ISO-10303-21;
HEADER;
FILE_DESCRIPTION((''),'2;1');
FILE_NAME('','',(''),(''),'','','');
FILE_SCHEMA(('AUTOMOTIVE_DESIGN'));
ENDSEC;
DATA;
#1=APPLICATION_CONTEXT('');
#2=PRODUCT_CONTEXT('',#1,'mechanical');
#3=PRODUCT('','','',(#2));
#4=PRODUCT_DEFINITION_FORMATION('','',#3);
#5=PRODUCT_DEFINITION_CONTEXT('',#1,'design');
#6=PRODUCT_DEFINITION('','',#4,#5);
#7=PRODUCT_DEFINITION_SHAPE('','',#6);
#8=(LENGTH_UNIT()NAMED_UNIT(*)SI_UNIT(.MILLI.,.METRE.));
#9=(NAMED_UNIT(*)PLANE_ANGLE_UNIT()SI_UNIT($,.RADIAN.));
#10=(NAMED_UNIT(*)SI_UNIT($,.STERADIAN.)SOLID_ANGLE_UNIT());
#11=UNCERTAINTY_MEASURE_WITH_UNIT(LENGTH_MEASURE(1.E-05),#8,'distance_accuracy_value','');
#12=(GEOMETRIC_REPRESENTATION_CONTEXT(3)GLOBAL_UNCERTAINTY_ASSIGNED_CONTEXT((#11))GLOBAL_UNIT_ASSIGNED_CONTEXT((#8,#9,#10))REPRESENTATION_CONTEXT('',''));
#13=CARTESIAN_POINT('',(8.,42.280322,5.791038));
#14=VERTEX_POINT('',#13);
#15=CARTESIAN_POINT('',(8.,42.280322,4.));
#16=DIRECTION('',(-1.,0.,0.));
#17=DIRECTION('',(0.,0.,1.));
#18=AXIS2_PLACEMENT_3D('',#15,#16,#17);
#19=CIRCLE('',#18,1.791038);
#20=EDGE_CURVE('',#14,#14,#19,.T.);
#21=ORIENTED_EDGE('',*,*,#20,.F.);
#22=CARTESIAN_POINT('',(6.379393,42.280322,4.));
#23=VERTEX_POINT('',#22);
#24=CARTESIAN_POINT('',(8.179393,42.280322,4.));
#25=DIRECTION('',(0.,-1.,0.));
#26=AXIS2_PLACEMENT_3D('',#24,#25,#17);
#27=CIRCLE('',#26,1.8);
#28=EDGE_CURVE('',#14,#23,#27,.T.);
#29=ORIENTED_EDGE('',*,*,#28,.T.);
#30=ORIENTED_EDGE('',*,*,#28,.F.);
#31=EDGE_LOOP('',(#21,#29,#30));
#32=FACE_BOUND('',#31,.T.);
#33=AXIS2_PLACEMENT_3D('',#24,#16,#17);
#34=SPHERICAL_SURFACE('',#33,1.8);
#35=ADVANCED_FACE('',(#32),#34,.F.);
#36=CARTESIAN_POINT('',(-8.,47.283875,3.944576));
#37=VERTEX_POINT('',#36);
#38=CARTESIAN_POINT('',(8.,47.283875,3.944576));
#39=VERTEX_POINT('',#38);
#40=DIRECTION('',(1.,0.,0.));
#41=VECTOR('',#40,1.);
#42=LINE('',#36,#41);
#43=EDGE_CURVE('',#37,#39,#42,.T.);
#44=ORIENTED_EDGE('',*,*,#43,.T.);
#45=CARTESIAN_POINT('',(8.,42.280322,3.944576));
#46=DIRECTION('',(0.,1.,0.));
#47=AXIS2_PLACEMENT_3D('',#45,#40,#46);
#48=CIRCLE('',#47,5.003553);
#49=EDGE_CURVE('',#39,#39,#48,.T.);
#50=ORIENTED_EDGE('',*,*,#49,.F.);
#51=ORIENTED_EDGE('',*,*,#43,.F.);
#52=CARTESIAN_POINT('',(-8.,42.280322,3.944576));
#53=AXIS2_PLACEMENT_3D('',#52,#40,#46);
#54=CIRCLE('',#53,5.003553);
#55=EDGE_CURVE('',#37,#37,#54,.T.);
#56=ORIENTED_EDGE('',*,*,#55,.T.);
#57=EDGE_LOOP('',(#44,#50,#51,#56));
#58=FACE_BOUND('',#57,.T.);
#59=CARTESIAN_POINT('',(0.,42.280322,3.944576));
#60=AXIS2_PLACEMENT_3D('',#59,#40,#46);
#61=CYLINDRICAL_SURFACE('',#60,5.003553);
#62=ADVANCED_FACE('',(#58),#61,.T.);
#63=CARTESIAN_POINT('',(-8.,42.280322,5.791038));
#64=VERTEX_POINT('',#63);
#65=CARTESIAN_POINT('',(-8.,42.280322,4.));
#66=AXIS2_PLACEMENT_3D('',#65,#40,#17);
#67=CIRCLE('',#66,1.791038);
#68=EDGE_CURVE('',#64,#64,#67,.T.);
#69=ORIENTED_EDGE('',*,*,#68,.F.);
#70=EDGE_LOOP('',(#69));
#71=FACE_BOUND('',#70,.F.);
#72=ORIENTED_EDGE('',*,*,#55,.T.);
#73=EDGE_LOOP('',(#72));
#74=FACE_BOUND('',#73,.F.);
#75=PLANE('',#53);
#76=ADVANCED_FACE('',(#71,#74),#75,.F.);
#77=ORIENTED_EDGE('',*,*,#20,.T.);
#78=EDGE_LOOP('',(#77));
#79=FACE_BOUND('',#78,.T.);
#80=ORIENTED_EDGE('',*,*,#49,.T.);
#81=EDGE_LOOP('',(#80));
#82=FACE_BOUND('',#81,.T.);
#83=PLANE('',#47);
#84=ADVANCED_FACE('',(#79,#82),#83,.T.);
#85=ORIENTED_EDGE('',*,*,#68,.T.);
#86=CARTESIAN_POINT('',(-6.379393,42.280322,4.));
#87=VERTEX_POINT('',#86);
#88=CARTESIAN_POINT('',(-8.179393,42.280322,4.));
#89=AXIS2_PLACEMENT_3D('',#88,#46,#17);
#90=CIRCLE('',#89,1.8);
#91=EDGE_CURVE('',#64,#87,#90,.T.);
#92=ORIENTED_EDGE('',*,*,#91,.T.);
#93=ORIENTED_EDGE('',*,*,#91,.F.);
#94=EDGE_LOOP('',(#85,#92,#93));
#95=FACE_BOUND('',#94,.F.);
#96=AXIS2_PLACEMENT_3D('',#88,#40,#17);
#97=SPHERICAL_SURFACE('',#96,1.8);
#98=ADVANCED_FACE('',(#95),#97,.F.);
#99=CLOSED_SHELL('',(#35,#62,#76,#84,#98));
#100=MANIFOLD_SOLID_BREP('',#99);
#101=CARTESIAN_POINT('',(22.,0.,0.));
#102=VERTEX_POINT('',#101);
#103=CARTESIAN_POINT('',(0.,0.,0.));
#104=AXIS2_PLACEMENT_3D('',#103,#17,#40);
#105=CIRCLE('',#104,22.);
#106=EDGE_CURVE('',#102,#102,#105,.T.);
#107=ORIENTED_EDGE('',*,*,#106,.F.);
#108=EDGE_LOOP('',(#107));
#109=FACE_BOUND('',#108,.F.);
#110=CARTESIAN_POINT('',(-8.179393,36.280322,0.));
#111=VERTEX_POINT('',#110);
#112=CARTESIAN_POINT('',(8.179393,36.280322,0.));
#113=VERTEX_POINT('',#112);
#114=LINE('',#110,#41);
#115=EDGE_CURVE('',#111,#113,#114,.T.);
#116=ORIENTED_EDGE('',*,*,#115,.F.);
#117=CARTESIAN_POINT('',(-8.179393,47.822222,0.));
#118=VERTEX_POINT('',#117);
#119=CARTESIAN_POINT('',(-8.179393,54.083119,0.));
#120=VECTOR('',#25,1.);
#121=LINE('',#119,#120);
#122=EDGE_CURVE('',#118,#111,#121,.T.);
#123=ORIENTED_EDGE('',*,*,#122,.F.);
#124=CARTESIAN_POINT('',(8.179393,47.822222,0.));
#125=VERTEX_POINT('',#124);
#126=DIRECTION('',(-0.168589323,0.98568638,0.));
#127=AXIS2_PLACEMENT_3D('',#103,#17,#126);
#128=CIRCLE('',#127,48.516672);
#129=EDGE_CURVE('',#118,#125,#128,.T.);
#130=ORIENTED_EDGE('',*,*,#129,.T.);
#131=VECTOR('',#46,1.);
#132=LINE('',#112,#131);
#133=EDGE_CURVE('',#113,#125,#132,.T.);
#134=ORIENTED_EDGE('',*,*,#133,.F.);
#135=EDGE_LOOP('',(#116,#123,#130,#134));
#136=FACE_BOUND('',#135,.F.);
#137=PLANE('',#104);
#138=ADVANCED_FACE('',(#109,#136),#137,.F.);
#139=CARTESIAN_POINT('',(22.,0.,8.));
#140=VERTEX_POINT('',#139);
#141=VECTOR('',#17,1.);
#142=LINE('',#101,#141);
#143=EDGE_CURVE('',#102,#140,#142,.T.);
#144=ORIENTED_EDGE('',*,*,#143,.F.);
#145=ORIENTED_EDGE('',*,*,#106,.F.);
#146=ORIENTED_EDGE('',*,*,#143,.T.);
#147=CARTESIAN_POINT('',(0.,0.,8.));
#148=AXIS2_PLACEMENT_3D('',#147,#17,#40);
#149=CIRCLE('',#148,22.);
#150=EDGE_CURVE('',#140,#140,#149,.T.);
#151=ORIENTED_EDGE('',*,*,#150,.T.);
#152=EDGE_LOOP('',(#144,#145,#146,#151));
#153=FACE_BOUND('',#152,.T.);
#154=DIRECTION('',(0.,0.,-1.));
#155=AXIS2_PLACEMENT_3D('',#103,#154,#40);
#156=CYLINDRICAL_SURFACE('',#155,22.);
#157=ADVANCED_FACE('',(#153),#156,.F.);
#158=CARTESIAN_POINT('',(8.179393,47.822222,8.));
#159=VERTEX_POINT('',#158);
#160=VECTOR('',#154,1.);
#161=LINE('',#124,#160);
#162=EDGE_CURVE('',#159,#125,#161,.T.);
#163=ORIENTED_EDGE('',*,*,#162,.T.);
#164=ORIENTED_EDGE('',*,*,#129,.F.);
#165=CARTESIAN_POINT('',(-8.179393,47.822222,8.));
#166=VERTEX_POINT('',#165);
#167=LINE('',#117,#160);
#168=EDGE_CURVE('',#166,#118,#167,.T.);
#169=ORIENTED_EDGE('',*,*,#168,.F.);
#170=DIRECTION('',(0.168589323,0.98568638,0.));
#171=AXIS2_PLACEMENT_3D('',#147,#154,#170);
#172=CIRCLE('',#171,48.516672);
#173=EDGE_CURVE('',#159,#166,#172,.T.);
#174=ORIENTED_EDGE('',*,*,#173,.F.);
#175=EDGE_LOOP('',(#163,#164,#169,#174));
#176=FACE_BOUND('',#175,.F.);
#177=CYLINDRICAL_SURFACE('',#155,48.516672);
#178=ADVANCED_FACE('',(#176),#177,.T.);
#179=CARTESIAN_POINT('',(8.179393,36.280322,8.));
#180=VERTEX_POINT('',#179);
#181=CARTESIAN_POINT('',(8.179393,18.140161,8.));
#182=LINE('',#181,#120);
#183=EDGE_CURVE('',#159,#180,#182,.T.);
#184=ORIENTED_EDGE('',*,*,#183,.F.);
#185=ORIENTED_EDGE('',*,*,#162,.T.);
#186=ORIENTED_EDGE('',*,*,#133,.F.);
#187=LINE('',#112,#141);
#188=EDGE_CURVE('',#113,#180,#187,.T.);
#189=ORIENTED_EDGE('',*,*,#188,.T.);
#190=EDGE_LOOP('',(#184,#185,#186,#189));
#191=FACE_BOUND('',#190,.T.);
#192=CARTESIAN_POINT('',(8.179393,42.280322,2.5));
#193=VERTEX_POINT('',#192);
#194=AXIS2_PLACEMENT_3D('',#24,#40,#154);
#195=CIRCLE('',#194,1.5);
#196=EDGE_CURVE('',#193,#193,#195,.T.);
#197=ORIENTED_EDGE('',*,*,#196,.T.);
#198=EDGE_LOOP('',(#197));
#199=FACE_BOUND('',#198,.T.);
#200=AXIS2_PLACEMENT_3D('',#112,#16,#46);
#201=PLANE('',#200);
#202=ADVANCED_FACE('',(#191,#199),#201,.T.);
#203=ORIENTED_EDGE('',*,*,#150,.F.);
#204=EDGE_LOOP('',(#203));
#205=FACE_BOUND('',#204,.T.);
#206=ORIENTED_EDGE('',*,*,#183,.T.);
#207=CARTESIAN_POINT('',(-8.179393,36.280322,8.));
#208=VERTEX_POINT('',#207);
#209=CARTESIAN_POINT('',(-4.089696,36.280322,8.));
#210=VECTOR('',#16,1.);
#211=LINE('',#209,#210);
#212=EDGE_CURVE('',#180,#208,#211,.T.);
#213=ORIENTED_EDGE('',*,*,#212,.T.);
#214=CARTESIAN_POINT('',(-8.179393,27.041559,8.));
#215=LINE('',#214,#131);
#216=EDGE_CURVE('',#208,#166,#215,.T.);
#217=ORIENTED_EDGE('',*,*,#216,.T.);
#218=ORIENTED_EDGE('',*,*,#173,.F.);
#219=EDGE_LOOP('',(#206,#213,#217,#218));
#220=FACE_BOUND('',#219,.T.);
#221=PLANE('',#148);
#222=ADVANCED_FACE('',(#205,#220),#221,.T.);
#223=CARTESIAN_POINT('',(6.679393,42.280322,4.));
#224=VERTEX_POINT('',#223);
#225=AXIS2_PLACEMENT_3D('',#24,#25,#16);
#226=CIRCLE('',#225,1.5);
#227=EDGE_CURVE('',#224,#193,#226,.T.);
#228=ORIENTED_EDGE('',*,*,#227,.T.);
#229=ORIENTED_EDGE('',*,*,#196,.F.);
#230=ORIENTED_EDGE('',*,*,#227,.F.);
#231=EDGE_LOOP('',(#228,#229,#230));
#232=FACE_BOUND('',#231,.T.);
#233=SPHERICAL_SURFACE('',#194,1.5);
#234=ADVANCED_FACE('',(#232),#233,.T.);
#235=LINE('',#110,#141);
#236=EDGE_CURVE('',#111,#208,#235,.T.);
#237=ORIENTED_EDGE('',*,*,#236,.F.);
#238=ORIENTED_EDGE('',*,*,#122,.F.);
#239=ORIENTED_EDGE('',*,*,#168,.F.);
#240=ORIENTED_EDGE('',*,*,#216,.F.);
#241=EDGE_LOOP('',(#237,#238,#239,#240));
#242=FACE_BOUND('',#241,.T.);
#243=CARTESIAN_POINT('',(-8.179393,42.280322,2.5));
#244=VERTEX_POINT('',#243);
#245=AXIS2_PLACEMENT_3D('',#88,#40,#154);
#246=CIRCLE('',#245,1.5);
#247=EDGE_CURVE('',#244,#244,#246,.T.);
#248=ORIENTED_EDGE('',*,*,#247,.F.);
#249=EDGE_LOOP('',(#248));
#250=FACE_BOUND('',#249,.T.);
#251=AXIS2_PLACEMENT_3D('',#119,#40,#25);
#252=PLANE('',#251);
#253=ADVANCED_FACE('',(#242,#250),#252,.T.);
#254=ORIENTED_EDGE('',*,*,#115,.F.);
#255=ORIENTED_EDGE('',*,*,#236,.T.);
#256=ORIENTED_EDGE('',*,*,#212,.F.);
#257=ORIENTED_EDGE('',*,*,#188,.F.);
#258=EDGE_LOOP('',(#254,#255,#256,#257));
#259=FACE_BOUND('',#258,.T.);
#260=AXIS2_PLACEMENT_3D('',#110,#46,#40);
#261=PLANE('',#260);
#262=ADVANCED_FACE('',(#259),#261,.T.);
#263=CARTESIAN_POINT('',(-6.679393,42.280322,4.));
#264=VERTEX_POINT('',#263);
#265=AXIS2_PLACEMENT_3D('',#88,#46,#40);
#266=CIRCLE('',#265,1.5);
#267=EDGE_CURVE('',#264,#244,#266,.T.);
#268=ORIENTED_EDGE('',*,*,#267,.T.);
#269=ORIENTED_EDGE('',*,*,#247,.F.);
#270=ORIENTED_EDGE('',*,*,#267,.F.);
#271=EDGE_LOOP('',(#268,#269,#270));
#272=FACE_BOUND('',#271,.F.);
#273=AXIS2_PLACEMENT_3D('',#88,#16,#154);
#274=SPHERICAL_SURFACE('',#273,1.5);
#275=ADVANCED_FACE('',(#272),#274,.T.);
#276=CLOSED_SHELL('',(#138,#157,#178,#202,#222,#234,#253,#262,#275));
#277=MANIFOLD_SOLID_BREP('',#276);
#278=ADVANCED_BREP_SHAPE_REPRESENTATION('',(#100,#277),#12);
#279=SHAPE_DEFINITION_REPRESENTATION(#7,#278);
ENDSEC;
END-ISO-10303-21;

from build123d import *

# Parameters (mm, degrees)
F0_R     = 48.5166715587
F0_R_2   = 22
F1_DEPTH = 8
F3_DEPTH = 25.4
F8_R     = 5.0035531794
F9_DEPTH = 8


# Not quite as in the source:
# - a pattern or mirror of a feature is missing from the dataset's text; its kind, count and spacing are read off the source's solid


with BuildPart() as f1:
    # F0 (on Top) → F1 (new body)
    with BuildSketch(Plane.XY):
        Circle(F0_R)
        Circle(F0_R_2, mode=Mode.SUBTRACT)
    extrude(amount=F1_DEPTH)

    # F2 (on Top) → F3 (cut)
    with BuildSketch(Plane.XY):
        Polygon((-8.1793928312, 54.083118853), (-8.1793928312, 47.8222223663), (-8.1793928312, 36.2803220355), (0, 36.2803220355), (8.1793928312, 36.2803220355), (8.1793928312, 54.083118853), align=None)
    extrude(amount=F3_DEPTH, mode=Mode.SUBTRACT)

    # F6 (on offset) → F7 (revolve)
    with BuildSketch(Plane(origin=(0, 42.2803220355, 0), x_dir=(-1, 0, 0), z_dir=(0, 1, 0))):
        with BuildLine():
            ThreePointArc((6.6793928312, 4), (7.1187326594, 2.9393398282), (8.1793928312, 2.5))
            Line((8.1793928312, 2.5), (8.1793928312, 4))
            Line((8.1793928312, 4), (6.6793928312, 4))
        make_face()
    f7 = revolve(axis=Axis((-2.9829649384, 42.2803220355, 4), (1, 0, 0)))

    # F7_copies: F7 across plane
    add(f7.mirror(Plane(origin=(0, 0, 0), x_dir=(0, 0, 1), z_dir=(1, 0, 0))))


with BuildPart() as f9:
    # F8 (on Right) → F9 (new body, symmetric)
    with BuildSketch(Plane.YZ):
        with Locations((42.2803220355, 3.9445757866)):
            Circle(F8_R)
    extrude(amount=F9_DEPTH, both=True)

    # F6 (on offset) → F10 (revolve, cut)
    with BuildSketch(Plane(origin=(0, 42.2803220355, 0), x_dir=(-1, 0, 0), z_dir=(0, 1, 0))):
        with BuildLine():
            ThreePointArc((8.1793928312, 5.8), (6.906600625, 5.2727922061), (6.3793928312, 4))
            Line((6.3793928312, 4), (6.6793928312, 4))
            ThreePointArc((6.6793928312, 4), (7.1187326594, 5.0606601718), (8.1793928312, 5.5))
            Line((8.1793928312, 5.5), (8.1793928312, 5.8))
        make_face()
        with BuildLine():
            Line((6.6793928312, 4), (8.1793928312, 4))
            Line((8.1793928312, 4), (8.1793928312, 5.5))
            ThreePointArc((8.1793928312, 5.5), (7.1187326594, 5.0606601718), (6.6793928312, 4))
        make_face()
    f10 = revolve(axis=Axis((-2.9829649384, 42.2803220355, 4), (1, 0, 0)), mode=Mode.SUBTRACT)

    # F10_copies: F10 across plane
    add(f10.mirror(Plane(origin=(0, 0, 0), x_dir=(0, 0, 1), z_dir=(1, 0, 0))), mode=Mode.SUBTRACT)


solid = Compound([f1.part, f9.part])
